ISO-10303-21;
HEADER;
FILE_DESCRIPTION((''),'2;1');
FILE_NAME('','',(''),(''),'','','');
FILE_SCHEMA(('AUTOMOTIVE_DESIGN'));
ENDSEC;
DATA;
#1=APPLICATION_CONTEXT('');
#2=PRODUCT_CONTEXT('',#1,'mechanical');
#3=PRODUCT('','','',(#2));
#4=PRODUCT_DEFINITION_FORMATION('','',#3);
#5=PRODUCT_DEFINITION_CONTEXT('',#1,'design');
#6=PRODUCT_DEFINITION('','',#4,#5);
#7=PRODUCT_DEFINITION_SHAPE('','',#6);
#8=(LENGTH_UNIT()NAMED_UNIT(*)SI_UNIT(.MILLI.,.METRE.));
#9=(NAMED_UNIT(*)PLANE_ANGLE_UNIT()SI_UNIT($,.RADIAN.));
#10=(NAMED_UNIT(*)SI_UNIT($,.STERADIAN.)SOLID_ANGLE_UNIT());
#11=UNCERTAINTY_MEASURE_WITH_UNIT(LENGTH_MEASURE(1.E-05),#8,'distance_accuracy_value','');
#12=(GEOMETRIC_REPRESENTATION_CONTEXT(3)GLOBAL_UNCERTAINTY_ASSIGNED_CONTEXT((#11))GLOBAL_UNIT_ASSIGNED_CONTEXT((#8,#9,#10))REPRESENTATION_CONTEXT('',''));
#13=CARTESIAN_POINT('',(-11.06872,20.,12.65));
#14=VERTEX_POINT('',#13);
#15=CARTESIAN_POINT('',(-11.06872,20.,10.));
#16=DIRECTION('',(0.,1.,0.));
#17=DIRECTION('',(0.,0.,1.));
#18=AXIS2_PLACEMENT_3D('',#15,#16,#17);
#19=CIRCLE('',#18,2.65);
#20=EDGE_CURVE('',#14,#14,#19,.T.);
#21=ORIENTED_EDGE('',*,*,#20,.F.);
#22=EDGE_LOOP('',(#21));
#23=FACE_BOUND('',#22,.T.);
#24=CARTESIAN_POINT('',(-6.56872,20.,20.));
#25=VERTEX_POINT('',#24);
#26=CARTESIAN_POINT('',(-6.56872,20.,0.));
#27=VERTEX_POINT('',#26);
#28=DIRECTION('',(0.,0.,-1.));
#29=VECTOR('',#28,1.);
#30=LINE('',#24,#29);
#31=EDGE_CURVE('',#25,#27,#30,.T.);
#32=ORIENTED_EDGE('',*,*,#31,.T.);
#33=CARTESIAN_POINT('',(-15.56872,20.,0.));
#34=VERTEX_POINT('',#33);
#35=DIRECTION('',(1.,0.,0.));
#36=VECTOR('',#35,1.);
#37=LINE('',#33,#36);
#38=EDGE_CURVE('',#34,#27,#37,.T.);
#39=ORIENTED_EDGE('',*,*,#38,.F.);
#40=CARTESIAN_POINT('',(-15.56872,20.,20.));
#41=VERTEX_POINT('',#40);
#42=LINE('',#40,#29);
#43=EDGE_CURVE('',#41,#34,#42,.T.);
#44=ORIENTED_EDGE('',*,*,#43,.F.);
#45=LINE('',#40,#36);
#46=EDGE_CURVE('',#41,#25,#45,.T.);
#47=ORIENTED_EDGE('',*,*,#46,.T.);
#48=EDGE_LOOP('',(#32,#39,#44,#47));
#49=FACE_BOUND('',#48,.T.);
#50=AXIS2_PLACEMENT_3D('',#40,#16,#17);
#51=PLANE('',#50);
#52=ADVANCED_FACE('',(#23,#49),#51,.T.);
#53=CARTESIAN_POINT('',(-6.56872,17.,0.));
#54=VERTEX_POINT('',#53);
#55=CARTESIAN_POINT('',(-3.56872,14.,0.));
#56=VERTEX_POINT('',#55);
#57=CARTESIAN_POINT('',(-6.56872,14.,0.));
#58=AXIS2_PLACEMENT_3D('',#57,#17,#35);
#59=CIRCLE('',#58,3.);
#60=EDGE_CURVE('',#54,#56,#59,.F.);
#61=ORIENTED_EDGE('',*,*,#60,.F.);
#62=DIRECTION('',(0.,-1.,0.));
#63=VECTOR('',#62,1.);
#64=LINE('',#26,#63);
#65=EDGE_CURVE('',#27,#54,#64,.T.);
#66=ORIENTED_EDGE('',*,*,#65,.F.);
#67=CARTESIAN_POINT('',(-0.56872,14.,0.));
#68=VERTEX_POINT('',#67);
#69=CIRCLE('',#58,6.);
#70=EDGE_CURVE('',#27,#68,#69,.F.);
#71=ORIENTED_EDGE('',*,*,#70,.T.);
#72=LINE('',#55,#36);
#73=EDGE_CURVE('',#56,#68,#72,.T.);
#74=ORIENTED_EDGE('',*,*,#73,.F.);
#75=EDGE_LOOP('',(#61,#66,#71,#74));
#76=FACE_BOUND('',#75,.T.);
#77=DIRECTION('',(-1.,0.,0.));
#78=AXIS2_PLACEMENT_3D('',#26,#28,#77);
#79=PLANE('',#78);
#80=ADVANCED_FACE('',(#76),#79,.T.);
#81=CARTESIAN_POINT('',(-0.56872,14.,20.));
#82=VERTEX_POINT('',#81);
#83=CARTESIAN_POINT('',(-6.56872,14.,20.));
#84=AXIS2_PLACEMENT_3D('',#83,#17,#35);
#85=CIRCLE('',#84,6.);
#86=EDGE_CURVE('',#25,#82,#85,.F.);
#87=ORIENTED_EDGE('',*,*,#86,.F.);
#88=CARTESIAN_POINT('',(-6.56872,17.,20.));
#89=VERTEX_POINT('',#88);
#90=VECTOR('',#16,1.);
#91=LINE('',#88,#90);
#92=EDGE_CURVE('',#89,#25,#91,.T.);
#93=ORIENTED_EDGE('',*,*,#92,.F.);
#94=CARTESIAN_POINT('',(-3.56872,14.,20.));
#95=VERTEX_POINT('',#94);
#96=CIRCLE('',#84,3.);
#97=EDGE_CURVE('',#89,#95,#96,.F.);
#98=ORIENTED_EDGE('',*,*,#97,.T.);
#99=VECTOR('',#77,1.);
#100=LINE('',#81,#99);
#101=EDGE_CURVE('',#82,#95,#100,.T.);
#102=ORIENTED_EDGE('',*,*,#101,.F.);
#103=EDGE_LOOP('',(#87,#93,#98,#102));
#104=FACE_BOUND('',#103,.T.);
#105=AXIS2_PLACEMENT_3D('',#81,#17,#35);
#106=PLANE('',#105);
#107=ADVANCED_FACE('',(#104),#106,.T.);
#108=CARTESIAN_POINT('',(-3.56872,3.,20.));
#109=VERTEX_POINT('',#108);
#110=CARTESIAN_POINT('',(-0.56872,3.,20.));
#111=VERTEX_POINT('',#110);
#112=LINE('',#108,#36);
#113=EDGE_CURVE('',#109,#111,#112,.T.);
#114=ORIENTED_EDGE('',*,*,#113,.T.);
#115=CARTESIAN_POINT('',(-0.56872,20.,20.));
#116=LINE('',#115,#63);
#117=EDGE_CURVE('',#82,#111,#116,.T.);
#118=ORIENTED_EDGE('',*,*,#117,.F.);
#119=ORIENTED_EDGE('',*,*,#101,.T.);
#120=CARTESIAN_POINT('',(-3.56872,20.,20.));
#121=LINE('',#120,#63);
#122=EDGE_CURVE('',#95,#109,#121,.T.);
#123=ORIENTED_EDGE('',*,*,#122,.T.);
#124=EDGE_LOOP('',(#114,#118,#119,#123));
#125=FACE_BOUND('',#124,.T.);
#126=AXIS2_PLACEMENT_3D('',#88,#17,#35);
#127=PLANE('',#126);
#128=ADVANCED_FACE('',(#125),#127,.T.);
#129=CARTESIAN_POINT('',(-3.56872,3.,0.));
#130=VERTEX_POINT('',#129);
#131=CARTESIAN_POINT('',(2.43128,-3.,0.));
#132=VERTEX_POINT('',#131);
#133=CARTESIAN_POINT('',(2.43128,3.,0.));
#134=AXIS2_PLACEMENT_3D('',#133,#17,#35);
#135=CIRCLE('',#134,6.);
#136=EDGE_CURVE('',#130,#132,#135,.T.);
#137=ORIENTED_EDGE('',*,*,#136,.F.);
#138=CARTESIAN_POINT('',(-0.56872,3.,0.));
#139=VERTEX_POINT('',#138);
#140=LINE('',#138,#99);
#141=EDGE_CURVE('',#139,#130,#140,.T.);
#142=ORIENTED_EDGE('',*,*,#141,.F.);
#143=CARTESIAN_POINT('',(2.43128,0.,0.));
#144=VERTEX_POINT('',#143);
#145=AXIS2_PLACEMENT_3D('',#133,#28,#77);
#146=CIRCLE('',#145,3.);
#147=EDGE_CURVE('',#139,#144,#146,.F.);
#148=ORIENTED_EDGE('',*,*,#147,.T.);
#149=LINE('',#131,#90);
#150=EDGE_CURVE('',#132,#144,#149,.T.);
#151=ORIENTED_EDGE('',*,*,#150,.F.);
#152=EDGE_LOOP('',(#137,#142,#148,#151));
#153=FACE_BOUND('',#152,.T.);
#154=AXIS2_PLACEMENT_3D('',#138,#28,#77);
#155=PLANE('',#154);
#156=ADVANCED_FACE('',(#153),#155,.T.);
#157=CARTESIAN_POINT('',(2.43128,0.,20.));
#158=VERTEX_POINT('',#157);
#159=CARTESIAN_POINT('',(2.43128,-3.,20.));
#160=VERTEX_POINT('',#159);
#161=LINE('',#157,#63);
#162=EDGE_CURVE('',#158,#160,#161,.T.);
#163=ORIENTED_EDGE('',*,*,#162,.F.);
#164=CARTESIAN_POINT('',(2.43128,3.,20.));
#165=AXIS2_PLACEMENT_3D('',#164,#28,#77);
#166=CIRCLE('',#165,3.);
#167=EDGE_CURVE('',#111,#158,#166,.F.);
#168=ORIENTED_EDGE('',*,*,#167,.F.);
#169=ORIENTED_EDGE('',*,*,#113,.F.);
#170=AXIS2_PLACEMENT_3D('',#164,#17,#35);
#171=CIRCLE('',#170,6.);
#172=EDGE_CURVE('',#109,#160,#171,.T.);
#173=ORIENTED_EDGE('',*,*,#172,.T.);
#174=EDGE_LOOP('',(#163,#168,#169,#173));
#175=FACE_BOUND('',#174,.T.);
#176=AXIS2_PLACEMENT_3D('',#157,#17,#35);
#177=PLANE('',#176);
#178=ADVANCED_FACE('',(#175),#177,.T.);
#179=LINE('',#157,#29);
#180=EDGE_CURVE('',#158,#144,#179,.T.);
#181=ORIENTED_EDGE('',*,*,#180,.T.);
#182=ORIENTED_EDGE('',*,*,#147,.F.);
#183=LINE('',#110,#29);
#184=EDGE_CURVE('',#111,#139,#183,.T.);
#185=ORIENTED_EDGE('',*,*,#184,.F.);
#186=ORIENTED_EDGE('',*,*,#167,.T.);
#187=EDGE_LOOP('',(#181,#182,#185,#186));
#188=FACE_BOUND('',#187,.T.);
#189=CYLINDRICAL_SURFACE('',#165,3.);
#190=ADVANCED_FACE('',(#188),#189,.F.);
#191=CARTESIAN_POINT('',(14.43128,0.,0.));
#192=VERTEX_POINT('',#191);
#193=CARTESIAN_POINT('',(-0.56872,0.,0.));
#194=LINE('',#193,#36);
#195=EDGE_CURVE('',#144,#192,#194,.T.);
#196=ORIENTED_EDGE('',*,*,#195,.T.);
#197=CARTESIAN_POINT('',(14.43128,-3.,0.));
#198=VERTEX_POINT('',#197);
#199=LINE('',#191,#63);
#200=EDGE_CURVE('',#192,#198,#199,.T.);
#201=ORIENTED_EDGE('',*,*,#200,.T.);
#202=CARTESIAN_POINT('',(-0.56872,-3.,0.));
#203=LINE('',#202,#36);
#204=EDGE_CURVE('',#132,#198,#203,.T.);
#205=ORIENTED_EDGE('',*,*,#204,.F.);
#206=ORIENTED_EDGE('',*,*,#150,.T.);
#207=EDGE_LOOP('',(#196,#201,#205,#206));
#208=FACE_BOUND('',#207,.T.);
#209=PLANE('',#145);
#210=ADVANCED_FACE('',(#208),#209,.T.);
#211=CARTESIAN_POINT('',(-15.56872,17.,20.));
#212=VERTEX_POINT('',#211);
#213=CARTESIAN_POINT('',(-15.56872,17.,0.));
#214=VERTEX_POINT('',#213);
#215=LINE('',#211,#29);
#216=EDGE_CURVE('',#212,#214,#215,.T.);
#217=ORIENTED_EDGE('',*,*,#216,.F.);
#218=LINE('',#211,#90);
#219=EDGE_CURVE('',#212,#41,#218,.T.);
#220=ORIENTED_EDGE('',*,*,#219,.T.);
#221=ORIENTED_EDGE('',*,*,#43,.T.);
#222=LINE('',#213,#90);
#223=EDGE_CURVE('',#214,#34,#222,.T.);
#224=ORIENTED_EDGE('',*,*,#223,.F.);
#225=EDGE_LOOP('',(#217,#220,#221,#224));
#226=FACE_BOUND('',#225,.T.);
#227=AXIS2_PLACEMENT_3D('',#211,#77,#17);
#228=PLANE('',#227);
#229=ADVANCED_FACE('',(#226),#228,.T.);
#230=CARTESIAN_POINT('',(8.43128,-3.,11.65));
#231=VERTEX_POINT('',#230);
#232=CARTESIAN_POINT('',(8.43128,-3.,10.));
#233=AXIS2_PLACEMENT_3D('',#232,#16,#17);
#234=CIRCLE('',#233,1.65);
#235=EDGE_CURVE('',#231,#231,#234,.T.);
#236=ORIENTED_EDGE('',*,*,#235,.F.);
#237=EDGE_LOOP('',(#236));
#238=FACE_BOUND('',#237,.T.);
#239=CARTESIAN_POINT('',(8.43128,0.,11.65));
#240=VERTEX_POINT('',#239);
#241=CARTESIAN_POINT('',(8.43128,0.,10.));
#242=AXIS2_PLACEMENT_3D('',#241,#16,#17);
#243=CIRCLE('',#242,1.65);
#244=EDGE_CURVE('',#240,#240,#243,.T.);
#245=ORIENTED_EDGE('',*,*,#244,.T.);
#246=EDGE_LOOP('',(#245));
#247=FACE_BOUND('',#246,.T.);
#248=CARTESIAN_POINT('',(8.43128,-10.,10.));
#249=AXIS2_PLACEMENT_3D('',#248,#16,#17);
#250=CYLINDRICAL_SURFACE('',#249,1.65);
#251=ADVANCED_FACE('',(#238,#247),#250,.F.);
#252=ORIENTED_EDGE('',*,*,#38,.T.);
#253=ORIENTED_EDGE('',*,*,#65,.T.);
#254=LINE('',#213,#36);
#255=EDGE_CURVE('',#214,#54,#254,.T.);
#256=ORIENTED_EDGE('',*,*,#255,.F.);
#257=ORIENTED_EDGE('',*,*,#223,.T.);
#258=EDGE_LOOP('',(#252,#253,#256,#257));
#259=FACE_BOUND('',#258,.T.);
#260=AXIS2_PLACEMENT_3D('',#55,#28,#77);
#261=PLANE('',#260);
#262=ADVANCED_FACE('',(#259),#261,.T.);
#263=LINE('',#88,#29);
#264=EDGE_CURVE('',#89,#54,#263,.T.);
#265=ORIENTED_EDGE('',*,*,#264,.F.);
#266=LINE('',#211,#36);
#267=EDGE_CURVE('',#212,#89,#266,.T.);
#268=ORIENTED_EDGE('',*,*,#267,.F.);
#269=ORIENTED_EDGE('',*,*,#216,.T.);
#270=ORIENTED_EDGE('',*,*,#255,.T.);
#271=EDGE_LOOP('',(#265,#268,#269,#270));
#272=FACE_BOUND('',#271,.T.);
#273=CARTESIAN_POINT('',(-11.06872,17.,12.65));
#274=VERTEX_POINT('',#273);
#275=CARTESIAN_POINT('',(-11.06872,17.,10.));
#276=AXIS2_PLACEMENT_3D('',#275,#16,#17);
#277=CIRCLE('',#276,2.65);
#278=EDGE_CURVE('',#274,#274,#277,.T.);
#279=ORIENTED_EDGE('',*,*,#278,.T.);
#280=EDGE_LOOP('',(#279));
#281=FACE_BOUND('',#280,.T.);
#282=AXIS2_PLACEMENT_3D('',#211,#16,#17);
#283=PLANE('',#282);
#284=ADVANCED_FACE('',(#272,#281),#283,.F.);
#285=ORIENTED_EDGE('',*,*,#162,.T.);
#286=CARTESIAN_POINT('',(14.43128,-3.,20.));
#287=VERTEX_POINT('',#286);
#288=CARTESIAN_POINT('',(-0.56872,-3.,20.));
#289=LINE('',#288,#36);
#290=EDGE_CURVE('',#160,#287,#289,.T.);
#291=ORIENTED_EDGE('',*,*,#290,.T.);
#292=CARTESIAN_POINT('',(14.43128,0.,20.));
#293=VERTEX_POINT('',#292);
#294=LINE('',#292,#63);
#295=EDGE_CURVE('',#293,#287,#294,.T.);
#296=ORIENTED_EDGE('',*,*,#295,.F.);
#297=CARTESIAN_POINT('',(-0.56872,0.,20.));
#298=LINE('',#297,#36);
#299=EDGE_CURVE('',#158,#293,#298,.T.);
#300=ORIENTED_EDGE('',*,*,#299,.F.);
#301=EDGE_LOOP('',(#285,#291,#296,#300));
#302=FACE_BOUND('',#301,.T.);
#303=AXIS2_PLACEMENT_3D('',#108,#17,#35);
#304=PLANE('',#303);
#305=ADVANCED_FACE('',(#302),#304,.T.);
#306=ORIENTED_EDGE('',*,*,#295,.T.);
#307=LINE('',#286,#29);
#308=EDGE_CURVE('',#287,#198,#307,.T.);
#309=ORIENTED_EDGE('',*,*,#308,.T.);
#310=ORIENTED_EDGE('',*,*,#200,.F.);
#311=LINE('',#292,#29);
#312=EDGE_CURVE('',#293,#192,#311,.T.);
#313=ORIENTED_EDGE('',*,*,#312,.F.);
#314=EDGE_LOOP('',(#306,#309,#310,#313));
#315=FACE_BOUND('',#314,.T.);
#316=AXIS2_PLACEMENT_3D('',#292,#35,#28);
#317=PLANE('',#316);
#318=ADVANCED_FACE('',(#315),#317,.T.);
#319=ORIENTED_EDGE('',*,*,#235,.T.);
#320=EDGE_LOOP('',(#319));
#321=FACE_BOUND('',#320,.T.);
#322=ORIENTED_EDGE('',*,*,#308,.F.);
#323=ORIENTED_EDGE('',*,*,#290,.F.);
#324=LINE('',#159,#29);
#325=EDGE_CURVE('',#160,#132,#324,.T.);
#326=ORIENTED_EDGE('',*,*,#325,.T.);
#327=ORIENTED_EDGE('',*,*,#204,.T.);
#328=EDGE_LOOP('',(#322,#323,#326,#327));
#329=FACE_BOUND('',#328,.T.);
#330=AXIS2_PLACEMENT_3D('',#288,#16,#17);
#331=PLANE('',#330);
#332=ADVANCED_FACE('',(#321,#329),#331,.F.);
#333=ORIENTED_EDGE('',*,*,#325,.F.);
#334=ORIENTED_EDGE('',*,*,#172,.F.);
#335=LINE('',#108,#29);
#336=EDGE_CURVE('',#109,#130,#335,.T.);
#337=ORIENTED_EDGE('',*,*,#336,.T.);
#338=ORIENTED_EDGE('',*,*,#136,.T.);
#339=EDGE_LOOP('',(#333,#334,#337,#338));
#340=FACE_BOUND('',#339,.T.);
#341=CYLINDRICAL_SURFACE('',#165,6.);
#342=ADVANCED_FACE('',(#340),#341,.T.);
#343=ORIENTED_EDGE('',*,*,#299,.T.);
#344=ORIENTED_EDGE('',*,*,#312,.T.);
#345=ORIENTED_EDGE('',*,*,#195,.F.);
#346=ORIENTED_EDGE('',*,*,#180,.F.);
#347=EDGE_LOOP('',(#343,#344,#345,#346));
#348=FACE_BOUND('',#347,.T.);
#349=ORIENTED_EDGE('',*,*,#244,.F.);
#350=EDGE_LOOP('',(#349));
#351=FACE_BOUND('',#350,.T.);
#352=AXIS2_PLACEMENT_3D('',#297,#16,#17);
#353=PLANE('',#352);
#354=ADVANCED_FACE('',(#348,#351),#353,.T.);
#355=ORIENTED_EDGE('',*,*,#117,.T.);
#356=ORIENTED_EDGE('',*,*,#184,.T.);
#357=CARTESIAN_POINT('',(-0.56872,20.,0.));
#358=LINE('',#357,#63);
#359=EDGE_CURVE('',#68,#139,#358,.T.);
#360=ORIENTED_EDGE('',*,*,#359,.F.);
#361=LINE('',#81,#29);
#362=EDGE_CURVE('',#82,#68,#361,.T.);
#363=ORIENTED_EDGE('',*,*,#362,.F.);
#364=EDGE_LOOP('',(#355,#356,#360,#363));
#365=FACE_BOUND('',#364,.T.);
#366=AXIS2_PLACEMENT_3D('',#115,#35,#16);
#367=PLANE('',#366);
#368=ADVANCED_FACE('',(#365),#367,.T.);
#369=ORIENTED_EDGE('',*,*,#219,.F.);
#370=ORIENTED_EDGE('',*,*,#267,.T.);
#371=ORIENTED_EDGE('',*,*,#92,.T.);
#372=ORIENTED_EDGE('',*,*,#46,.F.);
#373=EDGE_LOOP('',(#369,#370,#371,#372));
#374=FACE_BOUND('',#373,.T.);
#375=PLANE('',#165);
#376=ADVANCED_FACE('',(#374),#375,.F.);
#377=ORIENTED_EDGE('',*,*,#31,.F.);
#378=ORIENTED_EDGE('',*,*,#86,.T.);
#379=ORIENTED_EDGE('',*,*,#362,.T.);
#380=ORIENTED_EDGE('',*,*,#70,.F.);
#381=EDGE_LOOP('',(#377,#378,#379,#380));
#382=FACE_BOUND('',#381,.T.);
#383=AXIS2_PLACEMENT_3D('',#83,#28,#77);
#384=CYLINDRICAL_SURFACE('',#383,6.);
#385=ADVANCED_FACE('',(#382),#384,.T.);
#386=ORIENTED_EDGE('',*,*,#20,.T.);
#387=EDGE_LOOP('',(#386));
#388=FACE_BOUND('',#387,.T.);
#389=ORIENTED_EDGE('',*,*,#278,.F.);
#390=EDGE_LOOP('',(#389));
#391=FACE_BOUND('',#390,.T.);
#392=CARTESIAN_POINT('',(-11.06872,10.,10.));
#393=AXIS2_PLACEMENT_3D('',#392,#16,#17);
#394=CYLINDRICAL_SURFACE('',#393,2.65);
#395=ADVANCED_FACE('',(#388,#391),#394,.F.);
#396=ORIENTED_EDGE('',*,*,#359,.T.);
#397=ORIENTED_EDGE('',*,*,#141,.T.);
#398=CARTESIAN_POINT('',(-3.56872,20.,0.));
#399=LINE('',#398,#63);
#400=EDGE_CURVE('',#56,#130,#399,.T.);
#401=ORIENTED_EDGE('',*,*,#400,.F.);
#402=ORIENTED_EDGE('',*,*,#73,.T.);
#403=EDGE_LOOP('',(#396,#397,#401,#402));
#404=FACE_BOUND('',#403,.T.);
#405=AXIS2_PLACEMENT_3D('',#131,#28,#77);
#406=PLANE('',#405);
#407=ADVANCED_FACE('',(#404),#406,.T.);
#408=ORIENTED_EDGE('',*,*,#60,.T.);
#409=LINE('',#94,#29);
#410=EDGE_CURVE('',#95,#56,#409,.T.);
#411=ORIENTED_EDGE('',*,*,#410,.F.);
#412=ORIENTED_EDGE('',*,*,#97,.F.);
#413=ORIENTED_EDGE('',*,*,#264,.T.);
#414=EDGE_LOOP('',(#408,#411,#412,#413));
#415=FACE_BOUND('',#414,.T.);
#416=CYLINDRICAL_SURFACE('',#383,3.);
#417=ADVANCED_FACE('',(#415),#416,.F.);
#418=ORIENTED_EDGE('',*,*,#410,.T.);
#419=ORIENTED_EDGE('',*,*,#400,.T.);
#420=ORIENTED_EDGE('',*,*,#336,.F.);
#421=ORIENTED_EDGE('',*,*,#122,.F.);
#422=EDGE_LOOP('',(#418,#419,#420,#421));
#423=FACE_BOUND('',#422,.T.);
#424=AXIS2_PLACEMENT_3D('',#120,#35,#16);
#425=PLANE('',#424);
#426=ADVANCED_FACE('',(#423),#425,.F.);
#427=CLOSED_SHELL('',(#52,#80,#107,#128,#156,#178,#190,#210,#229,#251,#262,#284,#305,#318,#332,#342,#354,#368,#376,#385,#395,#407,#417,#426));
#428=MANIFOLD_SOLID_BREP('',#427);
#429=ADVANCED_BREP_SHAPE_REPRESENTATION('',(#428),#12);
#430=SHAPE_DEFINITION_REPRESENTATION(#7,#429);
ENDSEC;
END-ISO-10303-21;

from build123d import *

# Parameters (mm, degrees)
BASE_FLANGE1_DEPTH = 20
SKETCH6_R          = 2.65
CUT_EXTRUDE1_DEPTH = 10
SKETCH7_R          = 1.65
CUT_EXTRUDE2_DEPTH = 10


# Sheet-metal steps are written as plain solids
with BuildPart() as part:
    # Sketch1 → Base-Flange1 (new body)
    with BuildSketch(Plane.XY):
        with BuildLine():
            Line((-15.568720379, 20), (-6.568720379, 20))
            ThreePointArc((-6.568720379, 20), (-2.326079692, 18.242640687), (-0.568720379, 14))
            Line((-0.568720379, 14), (-0.568720379, 3))
            ThreePointArc((-0.568720379, 3), (0.309959277, 0.878679656), (2.431279621, 0))
            Line((2.431279621, 0), (14.431279621, 0))
            Line((14.431279621, 0), (14.431279621, -3))
            Line((14.431279621, -3), (2.431279621, -3))
            ThreePointArc((2.431279621, -3), (-1.811361066, -1.242640687), (-3.568720379, 3))
            Line((-3.568720379, 3), (-3.568720379, 14))
            ThreePointArc((-3.568720379, 14), (-4.447400036, 16.121320344), (-6.568720379, 17))
            Line((-6.568720379, 17), (-15.568720379, 17))
            Line((-15.568720379, 17), (-15.568720379, 20))
        make_face()
    extrude(amount=BASE_FLANGE1_DEPTH)

    # Sketch6 → Cut-Extrude1 (cut)
    with BuildSketch(Plane(origin=(0, 20, 0), x_dir=(1, 0, 0), z_dir=(0, 1, 0))):
        with Locations(Location((-11.068720379, -10, 0), (0, 0, 270))):
            Circle(SKETCH6_R)
    extrude(amount=-CUT_EXTRUDE1_DEPTH, mode=Mode.SUBTRACT)

    # Sketch7 → Cut-Extrude2 (cut)
    with BuildSketch(Plane(origin=(0, 0, 0), x_dir=(1, 0, 0), z_dir=(0, 1, 0))):
        with Locations(Location((8.431279621, -10, 0), (0, 0, 270))):
            Circle(SKETCH7_R)
    extrude(amount=-CUT_EXTRUDE2_DEPTH, mode=Mode.SUBTRACT)


solid = part.part
